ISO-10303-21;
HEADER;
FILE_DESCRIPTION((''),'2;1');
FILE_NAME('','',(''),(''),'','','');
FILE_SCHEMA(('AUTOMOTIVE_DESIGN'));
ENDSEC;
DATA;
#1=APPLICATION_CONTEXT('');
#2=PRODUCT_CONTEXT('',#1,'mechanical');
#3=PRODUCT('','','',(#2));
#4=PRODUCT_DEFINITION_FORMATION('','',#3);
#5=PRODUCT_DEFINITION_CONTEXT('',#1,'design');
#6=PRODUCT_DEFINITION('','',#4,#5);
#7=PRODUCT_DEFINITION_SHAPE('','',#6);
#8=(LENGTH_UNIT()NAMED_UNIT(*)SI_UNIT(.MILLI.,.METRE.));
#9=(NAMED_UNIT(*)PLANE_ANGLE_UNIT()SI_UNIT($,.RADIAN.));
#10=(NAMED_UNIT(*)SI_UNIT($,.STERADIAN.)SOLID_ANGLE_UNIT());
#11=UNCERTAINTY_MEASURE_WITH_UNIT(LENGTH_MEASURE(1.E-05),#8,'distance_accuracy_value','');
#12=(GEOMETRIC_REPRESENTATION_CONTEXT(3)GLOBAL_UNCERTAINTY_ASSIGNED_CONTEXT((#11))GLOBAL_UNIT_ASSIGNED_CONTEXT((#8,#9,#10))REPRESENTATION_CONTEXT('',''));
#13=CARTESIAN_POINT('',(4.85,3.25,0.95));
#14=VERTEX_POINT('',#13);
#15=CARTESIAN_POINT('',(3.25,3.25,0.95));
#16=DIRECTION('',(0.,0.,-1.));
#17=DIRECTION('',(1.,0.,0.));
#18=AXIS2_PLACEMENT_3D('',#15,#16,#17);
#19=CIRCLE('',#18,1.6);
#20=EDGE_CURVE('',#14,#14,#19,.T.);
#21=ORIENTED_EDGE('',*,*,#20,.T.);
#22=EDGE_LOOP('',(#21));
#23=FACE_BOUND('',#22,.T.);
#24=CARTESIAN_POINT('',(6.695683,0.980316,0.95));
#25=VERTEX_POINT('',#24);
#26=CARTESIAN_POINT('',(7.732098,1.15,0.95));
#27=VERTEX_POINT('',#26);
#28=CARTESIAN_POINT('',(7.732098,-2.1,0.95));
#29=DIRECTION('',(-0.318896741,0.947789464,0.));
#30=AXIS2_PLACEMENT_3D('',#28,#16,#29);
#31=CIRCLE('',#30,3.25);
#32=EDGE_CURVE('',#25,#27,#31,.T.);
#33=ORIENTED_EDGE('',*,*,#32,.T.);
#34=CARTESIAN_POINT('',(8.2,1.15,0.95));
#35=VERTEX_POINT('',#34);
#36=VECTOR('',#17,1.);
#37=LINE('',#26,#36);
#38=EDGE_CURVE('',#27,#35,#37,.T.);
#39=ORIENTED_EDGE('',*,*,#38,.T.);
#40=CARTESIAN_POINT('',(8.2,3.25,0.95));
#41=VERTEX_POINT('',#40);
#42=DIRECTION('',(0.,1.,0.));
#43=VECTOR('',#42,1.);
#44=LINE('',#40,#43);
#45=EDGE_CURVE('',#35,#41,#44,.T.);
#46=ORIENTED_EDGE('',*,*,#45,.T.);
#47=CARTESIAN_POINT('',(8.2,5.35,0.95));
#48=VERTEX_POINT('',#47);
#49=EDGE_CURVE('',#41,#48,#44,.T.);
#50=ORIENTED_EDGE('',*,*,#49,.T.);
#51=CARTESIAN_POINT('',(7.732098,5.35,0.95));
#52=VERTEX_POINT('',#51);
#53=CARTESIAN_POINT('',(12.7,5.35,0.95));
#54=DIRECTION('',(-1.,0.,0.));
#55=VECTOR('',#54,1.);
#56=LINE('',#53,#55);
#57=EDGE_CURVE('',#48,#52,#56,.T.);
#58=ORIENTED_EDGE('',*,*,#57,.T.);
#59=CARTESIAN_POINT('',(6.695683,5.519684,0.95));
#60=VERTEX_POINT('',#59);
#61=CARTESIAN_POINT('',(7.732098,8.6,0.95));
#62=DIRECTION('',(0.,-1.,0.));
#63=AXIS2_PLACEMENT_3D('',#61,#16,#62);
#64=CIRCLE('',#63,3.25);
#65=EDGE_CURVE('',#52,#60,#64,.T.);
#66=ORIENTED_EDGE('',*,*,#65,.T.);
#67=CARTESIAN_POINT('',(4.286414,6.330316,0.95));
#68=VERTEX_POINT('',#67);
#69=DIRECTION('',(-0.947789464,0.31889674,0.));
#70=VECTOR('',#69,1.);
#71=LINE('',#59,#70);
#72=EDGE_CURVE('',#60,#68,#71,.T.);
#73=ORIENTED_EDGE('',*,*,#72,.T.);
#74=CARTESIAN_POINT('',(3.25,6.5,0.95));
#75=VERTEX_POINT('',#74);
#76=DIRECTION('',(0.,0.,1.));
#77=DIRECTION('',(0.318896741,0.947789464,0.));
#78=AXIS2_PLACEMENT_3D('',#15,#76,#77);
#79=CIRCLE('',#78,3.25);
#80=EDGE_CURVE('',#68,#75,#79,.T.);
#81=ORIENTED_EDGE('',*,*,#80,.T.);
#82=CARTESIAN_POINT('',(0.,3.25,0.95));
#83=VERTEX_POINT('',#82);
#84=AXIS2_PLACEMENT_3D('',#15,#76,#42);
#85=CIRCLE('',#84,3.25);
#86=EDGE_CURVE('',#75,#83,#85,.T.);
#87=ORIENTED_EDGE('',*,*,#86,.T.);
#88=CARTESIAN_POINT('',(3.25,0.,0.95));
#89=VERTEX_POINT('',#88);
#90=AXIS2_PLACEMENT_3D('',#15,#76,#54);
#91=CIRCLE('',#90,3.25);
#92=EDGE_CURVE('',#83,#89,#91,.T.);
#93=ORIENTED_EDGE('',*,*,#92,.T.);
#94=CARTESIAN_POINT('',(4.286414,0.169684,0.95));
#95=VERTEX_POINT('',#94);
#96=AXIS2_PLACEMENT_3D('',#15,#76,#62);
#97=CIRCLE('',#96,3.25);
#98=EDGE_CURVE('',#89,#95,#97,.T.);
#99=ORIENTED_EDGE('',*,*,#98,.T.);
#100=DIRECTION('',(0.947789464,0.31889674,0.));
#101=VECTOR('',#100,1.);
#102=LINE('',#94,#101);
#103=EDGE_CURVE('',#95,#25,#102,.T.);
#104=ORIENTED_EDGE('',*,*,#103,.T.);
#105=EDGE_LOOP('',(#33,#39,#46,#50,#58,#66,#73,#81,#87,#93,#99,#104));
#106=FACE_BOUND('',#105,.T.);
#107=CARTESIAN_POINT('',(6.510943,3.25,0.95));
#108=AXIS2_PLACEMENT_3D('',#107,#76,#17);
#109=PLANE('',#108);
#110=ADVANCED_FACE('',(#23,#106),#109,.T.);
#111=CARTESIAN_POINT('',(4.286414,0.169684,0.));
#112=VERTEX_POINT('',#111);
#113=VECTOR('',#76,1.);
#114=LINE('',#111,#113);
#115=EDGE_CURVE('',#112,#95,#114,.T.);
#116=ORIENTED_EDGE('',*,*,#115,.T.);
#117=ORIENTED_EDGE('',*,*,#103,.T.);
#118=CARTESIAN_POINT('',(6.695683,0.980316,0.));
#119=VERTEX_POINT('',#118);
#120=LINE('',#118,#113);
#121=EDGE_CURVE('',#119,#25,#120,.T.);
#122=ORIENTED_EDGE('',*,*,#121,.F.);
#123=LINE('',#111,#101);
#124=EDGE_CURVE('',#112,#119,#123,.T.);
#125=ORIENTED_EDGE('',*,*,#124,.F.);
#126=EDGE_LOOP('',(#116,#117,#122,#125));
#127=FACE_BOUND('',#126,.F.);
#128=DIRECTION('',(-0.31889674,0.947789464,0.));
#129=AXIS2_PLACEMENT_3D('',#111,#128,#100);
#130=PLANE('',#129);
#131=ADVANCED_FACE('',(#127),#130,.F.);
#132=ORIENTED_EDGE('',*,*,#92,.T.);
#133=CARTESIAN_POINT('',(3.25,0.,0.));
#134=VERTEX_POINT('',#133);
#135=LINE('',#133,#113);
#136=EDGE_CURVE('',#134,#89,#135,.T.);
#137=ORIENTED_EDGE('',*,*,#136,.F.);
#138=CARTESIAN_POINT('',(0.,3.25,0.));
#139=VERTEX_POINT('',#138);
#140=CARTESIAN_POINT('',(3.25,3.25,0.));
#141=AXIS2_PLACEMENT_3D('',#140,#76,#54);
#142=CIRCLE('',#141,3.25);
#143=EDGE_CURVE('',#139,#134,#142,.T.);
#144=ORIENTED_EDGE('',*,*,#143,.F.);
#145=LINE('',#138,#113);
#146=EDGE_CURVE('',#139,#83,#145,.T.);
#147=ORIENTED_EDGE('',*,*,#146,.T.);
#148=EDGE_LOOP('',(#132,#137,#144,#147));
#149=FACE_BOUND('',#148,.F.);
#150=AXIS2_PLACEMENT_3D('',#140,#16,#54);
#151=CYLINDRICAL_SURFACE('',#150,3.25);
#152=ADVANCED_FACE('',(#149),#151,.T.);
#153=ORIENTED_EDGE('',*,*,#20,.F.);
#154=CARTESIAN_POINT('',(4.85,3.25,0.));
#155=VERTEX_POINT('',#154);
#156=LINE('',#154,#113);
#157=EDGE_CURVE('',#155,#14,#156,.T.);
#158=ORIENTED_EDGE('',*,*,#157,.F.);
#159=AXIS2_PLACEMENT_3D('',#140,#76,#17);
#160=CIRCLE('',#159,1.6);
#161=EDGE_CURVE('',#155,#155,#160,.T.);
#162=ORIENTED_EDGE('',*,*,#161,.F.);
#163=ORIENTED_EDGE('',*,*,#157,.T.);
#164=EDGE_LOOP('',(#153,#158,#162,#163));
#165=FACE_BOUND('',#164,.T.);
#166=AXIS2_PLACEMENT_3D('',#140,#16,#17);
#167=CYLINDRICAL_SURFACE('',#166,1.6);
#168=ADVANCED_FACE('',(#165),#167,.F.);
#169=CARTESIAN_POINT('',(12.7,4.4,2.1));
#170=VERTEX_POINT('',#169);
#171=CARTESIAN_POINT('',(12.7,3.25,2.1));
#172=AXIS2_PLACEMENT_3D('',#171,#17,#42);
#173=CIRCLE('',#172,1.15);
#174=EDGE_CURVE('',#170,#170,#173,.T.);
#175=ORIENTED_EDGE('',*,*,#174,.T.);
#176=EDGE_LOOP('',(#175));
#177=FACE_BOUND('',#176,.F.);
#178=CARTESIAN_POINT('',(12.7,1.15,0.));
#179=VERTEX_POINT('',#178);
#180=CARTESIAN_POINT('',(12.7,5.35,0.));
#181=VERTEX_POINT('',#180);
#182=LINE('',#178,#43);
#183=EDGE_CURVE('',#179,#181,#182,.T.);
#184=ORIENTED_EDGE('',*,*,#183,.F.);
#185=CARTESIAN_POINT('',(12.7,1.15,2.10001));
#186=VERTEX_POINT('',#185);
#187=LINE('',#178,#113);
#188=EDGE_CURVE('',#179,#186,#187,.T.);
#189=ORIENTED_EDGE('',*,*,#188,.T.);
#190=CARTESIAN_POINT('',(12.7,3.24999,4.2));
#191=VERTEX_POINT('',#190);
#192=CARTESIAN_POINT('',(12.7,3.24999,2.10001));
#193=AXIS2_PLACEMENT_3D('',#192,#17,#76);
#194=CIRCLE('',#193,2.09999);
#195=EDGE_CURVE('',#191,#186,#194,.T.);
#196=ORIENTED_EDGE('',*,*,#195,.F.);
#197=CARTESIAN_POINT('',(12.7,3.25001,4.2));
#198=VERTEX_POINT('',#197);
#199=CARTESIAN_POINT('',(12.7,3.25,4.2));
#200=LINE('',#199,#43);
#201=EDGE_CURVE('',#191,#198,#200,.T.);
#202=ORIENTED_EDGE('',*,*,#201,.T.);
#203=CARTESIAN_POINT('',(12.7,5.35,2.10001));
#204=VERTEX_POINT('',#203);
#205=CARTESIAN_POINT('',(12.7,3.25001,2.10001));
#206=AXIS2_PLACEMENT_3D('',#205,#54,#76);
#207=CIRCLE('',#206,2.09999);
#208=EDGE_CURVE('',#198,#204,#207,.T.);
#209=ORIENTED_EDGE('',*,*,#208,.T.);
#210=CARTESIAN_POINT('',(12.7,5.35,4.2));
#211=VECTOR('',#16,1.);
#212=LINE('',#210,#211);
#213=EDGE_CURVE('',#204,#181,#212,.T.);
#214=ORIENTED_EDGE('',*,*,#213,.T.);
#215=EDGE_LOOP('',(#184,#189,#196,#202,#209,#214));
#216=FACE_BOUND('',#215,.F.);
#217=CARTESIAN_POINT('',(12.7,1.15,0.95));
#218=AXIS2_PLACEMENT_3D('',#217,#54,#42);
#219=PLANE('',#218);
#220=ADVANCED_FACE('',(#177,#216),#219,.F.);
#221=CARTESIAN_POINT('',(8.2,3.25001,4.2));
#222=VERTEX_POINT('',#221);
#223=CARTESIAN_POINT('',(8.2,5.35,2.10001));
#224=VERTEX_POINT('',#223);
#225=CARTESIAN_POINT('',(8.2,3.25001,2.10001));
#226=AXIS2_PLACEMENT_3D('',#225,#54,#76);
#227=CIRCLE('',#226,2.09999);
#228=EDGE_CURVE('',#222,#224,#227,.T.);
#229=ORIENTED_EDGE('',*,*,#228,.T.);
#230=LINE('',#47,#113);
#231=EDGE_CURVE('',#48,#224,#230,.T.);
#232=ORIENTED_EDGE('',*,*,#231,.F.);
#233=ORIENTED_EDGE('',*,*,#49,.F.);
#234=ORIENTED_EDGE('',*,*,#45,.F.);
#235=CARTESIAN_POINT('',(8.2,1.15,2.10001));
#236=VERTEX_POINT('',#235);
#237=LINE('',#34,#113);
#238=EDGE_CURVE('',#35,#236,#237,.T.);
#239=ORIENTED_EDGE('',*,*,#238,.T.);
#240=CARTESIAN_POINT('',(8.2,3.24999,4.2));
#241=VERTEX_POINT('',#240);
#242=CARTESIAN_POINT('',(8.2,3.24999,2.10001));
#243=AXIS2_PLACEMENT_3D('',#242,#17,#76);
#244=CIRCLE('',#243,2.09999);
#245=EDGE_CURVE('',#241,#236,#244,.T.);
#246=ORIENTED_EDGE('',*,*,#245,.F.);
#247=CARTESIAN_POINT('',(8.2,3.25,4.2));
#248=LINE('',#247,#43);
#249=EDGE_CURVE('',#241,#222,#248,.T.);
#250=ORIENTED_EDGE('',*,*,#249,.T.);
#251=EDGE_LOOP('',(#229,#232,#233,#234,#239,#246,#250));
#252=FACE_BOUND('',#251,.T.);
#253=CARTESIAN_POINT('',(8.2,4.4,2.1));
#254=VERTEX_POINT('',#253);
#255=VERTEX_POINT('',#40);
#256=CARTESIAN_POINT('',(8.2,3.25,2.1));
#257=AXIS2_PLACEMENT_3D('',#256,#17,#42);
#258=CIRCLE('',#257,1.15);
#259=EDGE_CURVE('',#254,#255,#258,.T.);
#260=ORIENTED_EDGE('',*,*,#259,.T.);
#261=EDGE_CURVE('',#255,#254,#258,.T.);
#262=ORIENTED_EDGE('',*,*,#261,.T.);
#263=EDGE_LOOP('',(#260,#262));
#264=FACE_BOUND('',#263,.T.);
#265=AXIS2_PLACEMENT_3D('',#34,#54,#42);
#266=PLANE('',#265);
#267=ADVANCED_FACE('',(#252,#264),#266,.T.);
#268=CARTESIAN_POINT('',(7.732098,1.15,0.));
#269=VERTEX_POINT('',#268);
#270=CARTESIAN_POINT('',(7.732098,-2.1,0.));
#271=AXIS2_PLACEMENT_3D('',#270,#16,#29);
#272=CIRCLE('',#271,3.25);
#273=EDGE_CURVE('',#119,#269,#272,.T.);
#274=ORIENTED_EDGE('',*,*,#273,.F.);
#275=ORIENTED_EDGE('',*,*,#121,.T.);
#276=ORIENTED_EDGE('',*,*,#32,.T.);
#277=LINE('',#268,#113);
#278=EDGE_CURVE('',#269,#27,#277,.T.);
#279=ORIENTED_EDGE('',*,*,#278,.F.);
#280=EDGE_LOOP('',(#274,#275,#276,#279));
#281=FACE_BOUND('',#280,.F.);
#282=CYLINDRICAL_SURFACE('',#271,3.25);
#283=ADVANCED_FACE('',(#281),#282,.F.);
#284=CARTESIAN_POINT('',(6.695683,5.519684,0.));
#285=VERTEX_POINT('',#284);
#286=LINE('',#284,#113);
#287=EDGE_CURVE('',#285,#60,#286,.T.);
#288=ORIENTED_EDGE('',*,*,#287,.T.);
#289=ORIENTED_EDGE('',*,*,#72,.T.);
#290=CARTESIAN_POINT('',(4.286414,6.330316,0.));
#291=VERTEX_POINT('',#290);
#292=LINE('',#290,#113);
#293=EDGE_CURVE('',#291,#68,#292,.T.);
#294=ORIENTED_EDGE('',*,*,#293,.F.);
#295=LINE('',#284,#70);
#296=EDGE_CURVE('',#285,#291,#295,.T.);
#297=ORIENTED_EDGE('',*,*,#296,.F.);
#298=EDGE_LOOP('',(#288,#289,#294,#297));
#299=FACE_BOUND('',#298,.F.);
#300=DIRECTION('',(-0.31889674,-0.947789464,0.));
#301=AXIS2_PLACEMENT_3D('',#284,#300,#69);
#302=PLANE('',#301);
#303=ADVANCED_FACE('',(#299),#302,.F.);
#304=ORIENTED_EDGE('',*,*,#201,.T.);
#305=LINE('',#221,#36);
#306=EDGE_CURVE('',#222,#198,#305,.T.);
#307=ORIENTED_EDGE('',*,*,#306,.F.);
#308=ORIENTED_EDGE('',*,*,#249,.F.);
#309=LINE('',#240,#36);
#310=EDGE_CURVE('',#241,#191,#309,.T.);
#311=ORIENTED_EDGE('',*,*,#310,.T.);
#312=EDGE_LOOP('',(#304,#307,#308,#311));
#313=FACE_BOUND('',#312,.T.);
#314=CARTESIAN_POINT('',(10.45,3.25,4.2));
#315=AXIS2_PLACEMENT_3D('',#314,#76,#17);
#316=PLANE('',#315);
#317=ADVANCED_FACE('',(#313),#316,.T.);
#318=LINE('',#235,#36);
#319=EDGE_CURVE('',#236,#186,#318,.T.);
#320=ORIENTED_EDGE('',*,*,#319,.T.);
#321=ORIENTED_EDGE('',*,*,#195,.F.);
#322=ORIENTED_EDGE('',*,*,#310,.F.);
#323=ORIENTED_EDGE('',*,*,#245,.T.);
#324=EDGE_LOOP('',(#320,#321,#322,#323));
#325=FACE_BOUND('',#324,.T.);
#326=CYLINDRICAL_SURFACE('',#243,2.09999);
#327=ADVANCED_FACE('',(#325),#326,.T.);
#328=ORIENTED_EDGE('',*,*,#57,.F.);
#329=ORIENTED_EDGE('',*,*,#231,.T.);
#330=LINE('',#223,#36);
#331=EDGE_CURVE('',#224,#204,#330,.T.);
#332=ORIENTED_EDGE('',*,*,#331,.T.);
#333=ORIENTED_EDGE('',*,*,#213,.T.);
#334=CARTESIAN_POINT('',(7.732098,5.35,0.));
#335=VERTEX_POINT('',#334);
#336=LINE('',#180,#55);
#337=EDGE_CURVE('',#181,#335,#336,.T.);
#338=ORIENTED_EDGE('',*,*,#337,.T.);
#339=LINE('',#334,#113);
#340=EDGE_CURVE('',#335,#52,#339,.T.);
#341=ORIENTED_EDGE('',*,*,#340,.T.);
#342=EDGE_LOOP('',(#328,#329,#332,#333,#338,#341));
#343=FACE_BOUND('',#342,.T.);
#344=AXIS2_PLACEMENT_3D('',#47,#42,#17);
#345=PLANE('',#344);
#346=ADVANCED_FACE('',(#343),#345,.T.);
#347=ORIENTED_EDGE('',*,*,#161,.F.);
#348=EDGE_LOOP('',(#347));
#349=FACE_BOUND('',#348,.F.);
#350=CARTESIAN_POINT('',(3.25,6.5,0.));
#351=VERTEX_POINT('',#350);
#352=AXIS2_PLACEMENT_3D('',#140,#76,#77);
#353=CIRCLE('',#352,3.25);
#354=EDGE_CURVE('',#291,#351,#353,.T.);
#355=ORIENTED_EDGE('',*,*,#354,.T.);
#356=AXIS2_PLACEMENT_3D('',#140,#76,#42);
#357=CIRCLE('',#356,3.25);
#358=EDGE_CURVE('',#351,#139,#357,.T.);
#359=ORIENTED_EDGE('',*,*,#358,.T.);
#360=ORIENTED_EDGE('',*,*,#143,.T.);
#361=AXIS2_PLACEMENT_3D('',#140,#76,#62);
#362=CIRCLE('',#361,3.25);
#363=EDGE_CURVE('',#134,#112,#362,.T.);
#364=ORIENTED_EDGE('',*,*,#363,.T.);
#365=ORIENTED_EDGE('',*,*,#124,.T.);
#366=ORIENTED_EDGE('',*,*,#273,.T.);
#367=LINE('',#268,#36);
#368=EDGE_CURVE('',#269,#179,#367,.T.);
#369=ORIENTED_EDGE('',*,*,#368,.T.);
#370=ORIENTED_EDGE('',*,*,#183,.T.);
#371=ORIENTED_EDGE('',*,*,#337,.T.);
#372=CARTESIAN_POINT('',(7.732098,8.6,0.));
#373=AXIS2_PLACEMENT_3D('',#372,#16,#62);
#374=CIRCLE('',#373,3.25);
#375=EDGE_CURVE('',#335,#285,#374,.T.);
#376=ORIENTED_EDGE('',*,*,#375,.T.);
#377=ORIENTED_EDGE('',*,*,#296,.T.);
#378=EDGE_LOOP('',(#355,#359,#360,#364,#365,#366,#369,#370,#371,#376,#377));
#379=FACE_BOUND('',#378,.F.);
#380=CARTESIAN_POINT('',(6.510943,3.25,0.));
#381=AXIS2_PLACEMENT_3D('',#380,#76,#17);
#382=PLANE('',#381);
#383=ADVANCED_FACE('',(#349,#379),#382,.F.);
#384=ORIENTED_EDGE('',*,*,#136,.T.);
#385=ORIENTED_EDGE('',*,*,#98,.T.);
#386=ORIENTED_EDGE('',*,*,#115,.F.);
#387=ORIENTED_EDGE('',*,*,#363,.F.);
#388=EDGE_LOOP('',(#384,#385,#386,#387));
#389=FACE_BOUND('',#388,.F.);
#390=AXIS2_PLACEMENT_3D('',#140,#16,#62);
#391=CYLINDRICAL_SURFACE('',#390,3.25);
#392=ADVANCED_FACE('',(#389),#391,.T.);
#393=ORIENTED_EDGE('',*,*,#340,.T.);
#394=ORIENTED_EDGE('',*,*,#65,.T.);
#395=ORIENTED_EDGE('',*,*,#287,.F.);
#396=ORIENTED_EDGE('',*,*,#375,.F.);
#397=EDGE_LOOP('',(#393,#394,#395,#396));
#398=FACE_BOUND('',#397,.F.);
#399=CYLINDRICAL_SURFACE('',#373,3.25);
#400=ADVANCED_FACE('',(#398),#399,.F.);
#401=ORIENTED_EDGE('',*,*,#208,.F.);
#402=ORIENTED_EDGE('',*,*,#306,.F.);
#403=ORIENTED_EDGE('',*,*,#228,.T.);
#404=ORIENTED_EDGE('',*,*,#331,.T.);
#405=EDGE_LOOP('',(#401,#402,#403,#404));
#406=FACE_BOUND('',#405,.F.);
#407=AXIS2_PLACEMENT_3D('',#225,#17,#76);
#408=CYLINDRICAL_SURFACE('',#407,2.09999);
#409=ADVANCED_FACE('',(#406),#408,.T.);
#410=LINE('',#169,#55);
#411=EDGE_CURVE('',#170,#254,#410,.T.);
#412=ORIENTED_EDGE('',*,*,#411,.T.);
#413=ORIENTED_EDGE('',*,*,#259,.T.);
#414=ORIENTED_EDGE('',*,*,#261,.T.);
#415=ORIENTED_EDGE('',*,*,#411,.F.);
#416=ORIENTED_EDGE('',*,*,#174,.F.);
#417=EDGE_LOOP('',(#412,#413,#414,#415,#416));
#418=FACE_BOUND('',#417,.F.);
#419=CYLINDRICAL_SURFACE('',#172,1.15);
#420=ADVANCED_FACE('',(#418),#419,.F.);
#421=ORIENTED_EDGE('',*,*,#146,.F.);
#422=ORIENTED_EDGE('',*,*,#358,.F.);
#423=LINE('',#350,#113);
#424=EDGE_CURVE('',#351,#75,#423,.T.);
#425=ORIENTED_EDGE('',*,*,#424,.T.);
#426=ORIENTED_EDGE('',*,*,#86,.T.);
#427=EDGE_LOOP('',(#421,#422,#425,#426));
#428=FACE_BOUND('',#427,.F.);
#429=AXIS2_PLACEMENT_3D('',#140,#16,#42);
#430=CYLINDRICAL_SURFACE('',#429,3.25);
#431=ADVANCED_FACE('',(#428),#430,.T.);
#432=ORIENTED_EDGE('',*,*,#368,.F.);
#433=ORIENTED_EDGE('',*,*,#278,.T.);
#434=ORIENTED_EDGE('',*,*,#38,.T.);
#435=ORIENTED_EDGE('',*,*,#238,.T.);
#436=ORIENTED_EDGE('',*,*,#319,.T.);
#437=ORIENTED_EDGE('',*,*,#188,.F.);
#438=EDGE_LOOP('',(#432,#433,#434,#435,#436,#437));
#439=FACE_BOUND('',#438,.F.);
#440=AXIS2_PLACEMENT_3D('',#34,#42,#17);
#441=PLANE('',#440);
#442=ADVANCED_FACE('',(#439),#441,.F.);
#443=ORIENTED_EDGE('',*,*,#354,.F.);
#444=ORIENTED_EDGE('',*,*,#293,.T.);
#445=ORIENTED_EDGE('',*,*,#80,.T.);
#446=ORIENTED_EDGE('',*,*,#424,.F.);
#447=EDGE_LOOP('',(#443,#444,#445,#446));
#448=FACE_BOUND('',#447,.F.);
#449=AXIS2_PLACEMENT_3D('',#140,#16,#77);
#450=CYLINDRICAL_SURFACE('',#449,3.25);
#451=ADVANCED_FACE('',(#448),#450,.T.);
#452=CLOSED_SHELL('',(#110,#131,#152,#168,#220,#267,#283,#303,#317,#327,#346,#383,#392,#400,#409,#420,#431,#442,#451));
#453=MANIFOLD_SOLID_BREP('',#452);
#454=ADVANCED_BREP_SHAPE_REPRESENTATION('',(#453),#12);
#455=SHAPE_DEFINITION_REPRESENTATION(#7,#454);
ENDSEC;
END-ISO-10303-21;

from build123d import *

# Parameters (mm, degrees)
F0_R     = 1.6
F1_DEPTH = 0.95
F2_W     = 4.5
F2_H     = 4.2
F3_DEPTH = 3.25
F4_R     = 2.09999
F5_R     = 1.15
F6_DEPTH = 25


# Not quite as in the source:
# - a fillet or chamfer is up to 0.001 mm smaller than in the source, because OpenCascade refuses the exact size


with BuildPart() as f1:
    # F0 (on Top) → F1 (new body)
    with BuildSketch(Plane.XY):
        with BuildLine():
            Line((7.7320977576, 1.15), (12.7, 1.15))
            Line((12.7, 1.15), (12.7, 5.35))
            Line((12.7, 5.35), (8.2, 5.35))
            Line((8.2, 5.35), (7.7320977576, 5.35))
            ThreePointArc((7.7320977576, 5.35), (7.2069912058, 5.3927015871), (6.6956833513, 5.5196842405))
            Line((6.6956833513, 5.5196842405), (4.2864144063, 6.3303157595))
            ThreePointArc((4.2864144063, 6.3303157595), (3.7751065518, 6.4572984129), (3.25, 6.5))
            ThreePointArc((3.25, 6.5), (0.9519029611, 5.5480970389), (0, 3.25))
            ThreePointArc((0, 3.25), (0.9519029611, 0.9519029611), (3.25, 0))
            ThreePointArc((3.25, 0), (3.7751065518, 0.0427015871), (4.2864144063, 0.1696842405))
            Line((4.2864144063, 0.1696842405), (6.6956833513, 0.9803157595))
            ThreePointArc((6.6956833513, 0.9803157595), (7.2069912058, 1.1072984129), (7.7320977576, 1.15))
        make_face()
        with Locations((3.25, 3.25)):
            Circle(F0_R, mode=Mode.SUBTRACT)
    extrude(amount=F1_DEPTH)

    # F2 (on face) → F3 (join)
    with BuildSketch(Plane.XY.offset(0.95)):
        with Locations((10.45, 3.25)):
            Rectangle(F2_W, F2_H)
    extrude(amount=F3_DEPTH)

    # F4 (radius 2.1 in the source; OpenCascade refuses exactly that, so slightly less here)
    f4_edges = [f1.edges().sort_by_distance(p)[0] for p in [
        (10.45, 5.35, 4.2),
        (10.45, 1.15, 4.2),
    ]]
    fillet(f4_edges, radius=F4_R)

    # F5 (on face) → F6 (cut)
    with BuildSketch(Plane.YZ.offset(12.7)):
        with Locations((3.25, 2.1)):
            Circle(F5_R)
    extrude(amount=-F6_DEPTH, mode=Mode.SUBTRACT)


solid = f1.part
